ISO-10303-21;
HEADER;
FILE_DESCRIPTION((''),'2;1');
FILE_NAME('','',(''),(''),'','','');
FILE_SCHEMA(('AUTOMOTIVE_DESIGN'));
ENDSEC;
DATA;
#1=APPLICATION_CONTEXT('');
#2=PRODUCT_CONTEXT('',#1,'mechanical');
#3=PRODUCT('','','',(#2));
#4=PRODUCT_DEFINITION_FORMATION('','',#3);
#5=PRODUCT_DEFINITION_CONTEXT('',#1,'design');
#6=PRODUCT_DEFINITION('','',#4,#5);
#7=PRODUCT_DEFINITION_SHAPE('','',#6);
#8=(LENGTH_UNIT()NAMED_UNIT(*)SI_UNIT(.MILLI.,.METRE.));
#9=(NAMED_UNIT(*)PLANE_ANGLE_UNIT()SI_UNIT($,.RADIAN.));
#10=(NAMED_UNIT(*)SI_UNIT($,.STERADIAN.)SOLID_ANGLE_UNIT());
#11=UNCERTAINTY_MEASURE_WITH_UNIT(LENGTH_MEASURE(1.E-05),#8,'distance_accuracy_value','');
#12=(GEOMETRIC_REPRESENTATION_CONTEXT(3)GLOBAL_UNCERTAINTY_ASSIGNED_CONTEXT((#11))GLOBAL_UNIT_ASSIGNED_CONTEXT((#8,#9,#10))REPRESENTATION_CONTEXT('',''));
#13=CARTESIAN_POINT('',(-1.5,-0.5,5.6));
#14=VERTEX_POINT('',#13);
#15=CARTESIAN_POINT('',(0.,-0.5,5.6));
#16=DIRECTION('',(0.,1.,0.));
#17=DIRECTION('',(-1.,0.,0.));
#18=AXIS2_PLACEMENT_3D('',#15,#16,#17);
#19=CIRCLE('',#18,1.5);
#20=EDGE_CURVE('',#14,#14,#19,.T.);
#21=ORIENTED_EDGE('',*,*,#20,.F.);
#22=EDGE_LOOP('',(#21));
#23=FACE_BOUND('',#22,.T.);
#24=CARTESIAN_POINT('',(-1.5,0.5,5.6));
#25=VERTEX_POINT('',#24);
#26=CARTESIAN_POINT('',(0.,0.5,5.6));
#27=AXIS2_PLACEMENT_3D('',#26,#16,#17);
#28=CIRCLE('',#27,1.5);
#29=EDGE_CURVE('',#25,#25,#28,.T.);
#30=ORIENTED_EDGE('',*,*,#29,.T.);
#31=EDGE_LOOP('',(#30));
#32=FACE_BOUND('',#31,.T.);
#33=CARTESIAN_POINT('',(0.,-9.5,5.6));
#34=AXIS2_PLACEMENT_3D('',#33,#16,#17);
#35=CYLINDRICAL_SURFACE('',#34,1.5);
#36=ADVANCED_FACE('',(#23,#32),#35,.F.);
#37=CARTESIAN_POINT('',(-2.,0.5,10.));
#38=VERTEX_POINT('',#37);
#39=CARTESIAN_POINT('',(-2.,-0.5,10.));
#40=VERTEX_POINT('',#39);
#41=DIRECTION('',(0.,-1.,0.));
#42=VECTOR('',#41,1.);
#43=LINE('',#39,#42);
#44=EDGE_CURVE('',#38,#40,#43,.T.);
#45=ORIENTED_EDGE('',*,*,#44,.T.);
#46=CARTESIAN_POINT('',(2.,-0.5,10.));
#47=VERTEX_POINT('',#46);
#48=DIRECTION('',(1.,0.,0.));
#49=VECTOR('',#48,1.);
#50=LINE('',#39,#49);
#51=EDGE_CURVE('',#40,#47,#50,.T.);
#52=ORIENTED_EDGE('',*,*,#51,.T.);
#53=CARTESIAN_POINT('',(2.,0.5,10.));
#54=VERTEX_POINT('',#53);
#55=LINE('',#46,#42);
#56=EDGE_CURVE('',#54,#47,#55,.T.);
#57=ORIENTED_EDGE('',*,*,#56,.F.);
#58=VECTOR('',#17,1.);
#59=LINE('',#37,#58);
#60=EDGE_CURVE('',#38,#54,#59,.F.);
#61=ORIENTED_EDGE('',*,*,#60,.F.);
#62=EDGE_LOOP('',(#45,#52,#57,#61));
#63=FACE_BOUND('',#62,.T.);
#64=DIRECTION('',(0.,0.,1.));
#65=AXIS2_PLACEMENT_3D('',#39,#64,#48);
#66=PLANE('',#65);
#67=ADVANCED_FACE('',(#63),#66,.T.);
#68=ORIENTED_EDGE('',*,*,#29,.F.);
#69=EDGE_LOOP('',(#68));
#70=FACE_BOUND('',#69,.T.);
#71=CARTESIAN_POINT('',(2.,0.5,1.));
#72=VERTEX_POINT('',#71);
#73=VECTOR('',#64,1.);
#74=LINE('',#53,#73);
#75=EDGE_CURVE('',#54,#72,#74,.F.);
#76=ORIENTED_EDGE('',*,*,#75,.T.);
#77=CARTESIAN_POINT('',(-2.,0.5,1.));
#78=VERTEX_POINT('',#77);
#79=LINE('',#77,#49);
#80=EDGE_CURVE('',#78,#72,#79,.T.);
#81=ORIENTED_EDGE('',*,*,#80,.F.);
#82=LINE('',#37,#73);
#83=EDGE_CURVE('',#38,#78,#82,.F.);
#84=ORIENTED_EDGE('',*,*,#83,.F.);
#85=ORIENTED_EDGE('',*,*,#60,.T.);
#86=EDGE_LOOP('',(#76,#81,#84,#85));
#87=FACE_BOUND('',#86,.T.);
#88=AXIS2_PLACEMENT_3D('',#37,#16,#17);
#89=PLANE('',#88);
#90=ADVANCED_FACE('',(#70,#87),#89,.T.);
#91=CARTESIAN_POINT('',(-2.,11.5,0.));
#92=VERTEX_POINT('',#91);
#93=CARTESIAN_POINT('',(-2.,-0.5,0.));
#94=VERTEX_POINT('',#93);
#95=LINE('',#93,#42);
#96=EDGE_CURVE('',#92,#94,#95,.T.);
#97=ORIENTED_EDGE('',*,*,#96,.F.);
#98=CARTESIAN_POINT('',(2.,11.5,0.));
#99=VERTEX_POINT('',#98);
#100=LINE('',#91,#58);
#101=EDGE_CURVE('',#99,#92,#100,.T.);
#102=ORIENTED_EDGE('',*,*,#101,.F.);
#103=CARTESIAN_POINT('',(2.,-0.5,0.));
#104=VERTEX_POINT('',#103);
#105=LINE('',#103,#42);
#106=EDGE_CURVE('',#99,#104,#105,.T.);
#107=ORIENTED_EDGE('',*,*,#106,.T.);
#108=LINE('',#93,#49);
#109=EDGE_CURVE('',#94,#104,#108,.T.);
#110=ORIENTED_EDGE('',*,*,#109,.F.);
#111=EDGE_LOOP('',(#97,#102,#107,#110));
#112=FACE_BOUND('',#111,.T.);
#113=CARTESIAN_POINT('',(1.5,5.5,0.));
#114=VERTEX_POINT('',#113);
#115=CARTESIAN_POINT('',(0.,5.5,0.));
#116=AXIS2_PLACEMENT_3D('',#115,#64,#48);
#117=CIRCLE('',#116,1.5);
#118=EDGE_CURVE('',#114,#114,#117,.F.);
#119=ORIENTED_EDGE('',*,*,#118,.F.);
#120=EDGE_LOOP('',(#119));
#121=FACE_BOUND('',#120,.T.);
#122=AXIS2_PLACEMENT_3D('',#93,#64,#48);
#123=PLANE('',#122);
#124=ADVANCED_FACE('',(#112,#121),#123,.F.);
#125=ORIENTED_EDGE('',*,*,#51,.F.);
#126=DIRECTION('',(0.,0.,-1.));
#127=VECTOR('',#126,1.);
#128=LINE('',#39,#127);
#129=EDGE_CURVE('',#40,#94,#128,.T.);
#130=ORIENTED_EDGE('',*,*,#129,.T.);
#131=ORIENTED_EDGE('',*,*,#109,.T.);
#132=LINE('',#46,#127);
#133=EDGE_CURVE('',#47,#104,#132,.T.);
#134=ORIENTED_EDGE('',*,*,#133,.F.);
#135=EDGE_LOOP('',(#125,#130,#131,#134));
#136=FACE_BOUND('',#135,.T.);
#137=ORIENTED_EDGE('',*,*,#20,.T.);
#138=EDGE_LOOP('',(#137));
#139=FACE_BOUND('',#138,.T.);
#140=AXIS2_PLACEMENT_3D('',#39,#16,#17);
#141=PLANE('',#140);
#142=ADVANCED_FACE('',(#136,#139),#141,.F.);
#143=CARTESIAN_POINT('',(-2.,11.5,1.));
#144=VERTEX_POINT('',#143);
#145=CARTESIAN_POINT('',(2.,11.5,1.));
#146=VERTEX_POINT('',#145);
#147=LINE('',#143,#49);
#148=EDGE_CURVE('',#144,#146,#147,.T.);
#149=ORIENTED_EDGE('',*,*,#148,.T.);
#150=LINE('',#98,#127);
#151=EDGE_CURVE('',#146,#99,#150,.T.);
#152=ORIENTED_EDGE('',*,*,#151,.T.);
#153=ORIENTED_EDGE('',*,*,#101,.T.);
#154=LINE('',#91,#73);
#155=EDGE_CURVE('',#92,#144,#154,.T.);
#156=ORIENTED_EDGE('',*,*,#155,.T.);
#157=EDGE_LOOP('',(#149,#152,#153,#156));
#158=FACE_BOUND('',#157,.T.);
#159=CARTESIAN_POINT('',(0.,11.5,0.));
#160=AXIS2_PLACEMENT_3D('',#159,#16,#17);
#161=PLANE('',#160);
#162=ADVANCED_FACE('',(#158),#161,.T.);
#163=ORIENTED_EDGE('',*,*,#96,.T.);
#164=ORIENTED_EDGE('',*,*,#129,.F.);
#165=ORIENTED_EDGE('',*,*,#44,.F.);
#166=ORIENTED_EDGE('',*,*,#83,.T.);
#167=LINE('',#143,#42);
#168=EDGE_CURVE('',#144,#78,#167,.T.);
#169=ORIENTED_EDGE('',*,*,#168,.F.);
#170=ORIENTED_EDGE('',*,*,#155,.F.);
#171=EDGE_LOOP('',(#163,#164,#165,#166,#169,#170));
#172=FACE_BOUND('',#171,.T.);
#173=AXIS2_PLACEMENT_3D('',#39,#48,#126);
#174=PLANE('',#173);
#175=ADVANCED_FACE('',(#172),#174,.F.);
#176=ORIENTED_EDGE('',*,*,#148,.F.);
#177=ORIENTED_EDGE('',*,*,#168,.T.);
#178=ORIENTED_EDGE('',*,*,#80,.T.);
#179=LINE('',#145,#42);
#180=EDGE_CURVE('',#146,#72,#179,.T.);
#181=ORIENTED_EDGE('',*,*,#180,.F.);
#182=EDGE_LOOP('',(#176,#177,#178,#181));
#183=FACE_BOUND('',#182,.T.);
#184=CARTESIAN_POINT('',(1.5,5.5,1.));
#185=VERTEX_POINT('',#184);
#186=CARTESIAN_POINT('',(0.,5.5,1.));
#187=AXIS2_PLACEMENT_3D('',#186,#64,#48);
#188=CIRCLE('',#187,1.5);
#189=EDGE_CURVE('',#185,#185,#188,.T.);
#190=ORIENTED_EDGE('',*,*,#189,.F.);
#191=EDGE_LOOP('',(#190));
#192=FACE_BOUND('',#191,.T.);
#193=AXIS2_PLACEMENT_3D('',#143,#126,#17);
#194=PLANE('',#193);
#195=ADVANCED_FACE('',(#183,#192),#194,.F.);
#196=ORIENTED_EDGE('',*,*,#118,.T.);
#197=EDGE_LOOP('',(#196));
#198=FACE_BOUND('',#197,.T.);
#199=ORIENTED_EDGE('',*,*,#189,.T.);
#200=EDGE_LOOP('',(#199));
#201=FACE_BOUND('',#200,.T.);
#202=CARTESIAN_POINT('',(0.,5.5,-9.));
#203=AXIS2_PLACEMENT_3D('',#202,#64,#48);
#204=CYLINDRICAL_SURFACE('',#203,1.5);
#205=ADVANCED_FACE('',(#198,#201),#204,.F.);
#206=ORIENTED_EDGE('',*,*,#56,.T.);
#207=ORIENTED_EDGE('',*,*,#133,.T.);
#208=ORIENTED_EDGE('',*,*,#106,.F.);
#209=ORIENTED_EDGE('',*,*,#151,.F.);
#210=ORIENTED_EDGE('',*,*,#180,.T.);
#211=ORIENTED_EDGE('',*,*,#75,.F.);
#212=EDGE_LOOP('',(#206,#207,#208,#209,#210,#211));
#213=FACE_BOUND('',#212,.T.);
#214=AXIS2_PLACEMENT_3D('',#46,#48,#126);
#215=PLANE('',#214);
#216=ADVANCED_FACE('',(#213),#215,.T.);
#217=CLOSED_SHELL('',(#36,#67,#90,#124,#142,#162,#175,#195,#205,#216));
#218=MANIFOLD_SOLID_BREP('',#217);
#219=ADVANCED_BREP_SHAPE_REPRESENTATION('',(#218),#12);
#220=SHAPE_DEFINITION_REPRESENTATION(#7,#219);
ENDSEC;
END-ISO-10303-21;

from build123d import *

# Parameters (mm, degrees)
SKETCH1_W           = 4
SKETCH1_H           = 1
BOSS_EXTRUDE1_DEPTH = 10
SKETCH11_W          = 4
SKETCH11_H          = 1
BOSS_EXTRUDE2_DEPTH = 11
SKETCH12_R          = 1.5
CUT_EXTRUDE1_DEPTH  = 10
SKETCH13_R          = 1.5
CUT_EXTRUDE2_DEPTH  = 10


with BuildPart() as part:
    # Sketch1 → Boss-Extrude1 (new body)
    with BuildSketch(Plane.XY):
        Rectangle(SKETCH1_W, SKETCH1_H)
    extrude(amount=BOSS_EXTRUDE1_DEPTH)

    # Sketch11 → Boss-Extrude2 (add)
    with BuildSketch(Plane(origin=(0, 0.5, 0), x_dir=(1, 0, 0), z_dir=(0, 1, 0))):
        with Locations((0, -0.5)):
            Rectangle(SKETCH11_W, SKETCH11_H)
    extrude(amount=BOSS_EXTRUDE2_DEPTH)

    # Sketch12 → Cut-Extrude1 (cut)
    with BuildSketch(Plane(origin=(0, 0.5, 0), x_dir=(1, 0, 0), z_dir=(0, 1, 0))):
        with Locations(Location((0, -5.6, 0), (0, 0, 180))):
            Circle(SKETCH12_R)
    extrude(amount=-CUT_EXTRUDE1_DEPTH, mode=Mode.SUBTRACT)

    # Sketch13 → Cut-Extrude2 (cut)
    with BuildSketch(Plane.XY.offset(1)):
        with Locations((0, 5.5)):
            Circle(SKETCH13_R)
    extrude(amount=-CUT_EXTRUDE2_DEPTH, mode=Mode.SUBTRACT)


solid = part.part
